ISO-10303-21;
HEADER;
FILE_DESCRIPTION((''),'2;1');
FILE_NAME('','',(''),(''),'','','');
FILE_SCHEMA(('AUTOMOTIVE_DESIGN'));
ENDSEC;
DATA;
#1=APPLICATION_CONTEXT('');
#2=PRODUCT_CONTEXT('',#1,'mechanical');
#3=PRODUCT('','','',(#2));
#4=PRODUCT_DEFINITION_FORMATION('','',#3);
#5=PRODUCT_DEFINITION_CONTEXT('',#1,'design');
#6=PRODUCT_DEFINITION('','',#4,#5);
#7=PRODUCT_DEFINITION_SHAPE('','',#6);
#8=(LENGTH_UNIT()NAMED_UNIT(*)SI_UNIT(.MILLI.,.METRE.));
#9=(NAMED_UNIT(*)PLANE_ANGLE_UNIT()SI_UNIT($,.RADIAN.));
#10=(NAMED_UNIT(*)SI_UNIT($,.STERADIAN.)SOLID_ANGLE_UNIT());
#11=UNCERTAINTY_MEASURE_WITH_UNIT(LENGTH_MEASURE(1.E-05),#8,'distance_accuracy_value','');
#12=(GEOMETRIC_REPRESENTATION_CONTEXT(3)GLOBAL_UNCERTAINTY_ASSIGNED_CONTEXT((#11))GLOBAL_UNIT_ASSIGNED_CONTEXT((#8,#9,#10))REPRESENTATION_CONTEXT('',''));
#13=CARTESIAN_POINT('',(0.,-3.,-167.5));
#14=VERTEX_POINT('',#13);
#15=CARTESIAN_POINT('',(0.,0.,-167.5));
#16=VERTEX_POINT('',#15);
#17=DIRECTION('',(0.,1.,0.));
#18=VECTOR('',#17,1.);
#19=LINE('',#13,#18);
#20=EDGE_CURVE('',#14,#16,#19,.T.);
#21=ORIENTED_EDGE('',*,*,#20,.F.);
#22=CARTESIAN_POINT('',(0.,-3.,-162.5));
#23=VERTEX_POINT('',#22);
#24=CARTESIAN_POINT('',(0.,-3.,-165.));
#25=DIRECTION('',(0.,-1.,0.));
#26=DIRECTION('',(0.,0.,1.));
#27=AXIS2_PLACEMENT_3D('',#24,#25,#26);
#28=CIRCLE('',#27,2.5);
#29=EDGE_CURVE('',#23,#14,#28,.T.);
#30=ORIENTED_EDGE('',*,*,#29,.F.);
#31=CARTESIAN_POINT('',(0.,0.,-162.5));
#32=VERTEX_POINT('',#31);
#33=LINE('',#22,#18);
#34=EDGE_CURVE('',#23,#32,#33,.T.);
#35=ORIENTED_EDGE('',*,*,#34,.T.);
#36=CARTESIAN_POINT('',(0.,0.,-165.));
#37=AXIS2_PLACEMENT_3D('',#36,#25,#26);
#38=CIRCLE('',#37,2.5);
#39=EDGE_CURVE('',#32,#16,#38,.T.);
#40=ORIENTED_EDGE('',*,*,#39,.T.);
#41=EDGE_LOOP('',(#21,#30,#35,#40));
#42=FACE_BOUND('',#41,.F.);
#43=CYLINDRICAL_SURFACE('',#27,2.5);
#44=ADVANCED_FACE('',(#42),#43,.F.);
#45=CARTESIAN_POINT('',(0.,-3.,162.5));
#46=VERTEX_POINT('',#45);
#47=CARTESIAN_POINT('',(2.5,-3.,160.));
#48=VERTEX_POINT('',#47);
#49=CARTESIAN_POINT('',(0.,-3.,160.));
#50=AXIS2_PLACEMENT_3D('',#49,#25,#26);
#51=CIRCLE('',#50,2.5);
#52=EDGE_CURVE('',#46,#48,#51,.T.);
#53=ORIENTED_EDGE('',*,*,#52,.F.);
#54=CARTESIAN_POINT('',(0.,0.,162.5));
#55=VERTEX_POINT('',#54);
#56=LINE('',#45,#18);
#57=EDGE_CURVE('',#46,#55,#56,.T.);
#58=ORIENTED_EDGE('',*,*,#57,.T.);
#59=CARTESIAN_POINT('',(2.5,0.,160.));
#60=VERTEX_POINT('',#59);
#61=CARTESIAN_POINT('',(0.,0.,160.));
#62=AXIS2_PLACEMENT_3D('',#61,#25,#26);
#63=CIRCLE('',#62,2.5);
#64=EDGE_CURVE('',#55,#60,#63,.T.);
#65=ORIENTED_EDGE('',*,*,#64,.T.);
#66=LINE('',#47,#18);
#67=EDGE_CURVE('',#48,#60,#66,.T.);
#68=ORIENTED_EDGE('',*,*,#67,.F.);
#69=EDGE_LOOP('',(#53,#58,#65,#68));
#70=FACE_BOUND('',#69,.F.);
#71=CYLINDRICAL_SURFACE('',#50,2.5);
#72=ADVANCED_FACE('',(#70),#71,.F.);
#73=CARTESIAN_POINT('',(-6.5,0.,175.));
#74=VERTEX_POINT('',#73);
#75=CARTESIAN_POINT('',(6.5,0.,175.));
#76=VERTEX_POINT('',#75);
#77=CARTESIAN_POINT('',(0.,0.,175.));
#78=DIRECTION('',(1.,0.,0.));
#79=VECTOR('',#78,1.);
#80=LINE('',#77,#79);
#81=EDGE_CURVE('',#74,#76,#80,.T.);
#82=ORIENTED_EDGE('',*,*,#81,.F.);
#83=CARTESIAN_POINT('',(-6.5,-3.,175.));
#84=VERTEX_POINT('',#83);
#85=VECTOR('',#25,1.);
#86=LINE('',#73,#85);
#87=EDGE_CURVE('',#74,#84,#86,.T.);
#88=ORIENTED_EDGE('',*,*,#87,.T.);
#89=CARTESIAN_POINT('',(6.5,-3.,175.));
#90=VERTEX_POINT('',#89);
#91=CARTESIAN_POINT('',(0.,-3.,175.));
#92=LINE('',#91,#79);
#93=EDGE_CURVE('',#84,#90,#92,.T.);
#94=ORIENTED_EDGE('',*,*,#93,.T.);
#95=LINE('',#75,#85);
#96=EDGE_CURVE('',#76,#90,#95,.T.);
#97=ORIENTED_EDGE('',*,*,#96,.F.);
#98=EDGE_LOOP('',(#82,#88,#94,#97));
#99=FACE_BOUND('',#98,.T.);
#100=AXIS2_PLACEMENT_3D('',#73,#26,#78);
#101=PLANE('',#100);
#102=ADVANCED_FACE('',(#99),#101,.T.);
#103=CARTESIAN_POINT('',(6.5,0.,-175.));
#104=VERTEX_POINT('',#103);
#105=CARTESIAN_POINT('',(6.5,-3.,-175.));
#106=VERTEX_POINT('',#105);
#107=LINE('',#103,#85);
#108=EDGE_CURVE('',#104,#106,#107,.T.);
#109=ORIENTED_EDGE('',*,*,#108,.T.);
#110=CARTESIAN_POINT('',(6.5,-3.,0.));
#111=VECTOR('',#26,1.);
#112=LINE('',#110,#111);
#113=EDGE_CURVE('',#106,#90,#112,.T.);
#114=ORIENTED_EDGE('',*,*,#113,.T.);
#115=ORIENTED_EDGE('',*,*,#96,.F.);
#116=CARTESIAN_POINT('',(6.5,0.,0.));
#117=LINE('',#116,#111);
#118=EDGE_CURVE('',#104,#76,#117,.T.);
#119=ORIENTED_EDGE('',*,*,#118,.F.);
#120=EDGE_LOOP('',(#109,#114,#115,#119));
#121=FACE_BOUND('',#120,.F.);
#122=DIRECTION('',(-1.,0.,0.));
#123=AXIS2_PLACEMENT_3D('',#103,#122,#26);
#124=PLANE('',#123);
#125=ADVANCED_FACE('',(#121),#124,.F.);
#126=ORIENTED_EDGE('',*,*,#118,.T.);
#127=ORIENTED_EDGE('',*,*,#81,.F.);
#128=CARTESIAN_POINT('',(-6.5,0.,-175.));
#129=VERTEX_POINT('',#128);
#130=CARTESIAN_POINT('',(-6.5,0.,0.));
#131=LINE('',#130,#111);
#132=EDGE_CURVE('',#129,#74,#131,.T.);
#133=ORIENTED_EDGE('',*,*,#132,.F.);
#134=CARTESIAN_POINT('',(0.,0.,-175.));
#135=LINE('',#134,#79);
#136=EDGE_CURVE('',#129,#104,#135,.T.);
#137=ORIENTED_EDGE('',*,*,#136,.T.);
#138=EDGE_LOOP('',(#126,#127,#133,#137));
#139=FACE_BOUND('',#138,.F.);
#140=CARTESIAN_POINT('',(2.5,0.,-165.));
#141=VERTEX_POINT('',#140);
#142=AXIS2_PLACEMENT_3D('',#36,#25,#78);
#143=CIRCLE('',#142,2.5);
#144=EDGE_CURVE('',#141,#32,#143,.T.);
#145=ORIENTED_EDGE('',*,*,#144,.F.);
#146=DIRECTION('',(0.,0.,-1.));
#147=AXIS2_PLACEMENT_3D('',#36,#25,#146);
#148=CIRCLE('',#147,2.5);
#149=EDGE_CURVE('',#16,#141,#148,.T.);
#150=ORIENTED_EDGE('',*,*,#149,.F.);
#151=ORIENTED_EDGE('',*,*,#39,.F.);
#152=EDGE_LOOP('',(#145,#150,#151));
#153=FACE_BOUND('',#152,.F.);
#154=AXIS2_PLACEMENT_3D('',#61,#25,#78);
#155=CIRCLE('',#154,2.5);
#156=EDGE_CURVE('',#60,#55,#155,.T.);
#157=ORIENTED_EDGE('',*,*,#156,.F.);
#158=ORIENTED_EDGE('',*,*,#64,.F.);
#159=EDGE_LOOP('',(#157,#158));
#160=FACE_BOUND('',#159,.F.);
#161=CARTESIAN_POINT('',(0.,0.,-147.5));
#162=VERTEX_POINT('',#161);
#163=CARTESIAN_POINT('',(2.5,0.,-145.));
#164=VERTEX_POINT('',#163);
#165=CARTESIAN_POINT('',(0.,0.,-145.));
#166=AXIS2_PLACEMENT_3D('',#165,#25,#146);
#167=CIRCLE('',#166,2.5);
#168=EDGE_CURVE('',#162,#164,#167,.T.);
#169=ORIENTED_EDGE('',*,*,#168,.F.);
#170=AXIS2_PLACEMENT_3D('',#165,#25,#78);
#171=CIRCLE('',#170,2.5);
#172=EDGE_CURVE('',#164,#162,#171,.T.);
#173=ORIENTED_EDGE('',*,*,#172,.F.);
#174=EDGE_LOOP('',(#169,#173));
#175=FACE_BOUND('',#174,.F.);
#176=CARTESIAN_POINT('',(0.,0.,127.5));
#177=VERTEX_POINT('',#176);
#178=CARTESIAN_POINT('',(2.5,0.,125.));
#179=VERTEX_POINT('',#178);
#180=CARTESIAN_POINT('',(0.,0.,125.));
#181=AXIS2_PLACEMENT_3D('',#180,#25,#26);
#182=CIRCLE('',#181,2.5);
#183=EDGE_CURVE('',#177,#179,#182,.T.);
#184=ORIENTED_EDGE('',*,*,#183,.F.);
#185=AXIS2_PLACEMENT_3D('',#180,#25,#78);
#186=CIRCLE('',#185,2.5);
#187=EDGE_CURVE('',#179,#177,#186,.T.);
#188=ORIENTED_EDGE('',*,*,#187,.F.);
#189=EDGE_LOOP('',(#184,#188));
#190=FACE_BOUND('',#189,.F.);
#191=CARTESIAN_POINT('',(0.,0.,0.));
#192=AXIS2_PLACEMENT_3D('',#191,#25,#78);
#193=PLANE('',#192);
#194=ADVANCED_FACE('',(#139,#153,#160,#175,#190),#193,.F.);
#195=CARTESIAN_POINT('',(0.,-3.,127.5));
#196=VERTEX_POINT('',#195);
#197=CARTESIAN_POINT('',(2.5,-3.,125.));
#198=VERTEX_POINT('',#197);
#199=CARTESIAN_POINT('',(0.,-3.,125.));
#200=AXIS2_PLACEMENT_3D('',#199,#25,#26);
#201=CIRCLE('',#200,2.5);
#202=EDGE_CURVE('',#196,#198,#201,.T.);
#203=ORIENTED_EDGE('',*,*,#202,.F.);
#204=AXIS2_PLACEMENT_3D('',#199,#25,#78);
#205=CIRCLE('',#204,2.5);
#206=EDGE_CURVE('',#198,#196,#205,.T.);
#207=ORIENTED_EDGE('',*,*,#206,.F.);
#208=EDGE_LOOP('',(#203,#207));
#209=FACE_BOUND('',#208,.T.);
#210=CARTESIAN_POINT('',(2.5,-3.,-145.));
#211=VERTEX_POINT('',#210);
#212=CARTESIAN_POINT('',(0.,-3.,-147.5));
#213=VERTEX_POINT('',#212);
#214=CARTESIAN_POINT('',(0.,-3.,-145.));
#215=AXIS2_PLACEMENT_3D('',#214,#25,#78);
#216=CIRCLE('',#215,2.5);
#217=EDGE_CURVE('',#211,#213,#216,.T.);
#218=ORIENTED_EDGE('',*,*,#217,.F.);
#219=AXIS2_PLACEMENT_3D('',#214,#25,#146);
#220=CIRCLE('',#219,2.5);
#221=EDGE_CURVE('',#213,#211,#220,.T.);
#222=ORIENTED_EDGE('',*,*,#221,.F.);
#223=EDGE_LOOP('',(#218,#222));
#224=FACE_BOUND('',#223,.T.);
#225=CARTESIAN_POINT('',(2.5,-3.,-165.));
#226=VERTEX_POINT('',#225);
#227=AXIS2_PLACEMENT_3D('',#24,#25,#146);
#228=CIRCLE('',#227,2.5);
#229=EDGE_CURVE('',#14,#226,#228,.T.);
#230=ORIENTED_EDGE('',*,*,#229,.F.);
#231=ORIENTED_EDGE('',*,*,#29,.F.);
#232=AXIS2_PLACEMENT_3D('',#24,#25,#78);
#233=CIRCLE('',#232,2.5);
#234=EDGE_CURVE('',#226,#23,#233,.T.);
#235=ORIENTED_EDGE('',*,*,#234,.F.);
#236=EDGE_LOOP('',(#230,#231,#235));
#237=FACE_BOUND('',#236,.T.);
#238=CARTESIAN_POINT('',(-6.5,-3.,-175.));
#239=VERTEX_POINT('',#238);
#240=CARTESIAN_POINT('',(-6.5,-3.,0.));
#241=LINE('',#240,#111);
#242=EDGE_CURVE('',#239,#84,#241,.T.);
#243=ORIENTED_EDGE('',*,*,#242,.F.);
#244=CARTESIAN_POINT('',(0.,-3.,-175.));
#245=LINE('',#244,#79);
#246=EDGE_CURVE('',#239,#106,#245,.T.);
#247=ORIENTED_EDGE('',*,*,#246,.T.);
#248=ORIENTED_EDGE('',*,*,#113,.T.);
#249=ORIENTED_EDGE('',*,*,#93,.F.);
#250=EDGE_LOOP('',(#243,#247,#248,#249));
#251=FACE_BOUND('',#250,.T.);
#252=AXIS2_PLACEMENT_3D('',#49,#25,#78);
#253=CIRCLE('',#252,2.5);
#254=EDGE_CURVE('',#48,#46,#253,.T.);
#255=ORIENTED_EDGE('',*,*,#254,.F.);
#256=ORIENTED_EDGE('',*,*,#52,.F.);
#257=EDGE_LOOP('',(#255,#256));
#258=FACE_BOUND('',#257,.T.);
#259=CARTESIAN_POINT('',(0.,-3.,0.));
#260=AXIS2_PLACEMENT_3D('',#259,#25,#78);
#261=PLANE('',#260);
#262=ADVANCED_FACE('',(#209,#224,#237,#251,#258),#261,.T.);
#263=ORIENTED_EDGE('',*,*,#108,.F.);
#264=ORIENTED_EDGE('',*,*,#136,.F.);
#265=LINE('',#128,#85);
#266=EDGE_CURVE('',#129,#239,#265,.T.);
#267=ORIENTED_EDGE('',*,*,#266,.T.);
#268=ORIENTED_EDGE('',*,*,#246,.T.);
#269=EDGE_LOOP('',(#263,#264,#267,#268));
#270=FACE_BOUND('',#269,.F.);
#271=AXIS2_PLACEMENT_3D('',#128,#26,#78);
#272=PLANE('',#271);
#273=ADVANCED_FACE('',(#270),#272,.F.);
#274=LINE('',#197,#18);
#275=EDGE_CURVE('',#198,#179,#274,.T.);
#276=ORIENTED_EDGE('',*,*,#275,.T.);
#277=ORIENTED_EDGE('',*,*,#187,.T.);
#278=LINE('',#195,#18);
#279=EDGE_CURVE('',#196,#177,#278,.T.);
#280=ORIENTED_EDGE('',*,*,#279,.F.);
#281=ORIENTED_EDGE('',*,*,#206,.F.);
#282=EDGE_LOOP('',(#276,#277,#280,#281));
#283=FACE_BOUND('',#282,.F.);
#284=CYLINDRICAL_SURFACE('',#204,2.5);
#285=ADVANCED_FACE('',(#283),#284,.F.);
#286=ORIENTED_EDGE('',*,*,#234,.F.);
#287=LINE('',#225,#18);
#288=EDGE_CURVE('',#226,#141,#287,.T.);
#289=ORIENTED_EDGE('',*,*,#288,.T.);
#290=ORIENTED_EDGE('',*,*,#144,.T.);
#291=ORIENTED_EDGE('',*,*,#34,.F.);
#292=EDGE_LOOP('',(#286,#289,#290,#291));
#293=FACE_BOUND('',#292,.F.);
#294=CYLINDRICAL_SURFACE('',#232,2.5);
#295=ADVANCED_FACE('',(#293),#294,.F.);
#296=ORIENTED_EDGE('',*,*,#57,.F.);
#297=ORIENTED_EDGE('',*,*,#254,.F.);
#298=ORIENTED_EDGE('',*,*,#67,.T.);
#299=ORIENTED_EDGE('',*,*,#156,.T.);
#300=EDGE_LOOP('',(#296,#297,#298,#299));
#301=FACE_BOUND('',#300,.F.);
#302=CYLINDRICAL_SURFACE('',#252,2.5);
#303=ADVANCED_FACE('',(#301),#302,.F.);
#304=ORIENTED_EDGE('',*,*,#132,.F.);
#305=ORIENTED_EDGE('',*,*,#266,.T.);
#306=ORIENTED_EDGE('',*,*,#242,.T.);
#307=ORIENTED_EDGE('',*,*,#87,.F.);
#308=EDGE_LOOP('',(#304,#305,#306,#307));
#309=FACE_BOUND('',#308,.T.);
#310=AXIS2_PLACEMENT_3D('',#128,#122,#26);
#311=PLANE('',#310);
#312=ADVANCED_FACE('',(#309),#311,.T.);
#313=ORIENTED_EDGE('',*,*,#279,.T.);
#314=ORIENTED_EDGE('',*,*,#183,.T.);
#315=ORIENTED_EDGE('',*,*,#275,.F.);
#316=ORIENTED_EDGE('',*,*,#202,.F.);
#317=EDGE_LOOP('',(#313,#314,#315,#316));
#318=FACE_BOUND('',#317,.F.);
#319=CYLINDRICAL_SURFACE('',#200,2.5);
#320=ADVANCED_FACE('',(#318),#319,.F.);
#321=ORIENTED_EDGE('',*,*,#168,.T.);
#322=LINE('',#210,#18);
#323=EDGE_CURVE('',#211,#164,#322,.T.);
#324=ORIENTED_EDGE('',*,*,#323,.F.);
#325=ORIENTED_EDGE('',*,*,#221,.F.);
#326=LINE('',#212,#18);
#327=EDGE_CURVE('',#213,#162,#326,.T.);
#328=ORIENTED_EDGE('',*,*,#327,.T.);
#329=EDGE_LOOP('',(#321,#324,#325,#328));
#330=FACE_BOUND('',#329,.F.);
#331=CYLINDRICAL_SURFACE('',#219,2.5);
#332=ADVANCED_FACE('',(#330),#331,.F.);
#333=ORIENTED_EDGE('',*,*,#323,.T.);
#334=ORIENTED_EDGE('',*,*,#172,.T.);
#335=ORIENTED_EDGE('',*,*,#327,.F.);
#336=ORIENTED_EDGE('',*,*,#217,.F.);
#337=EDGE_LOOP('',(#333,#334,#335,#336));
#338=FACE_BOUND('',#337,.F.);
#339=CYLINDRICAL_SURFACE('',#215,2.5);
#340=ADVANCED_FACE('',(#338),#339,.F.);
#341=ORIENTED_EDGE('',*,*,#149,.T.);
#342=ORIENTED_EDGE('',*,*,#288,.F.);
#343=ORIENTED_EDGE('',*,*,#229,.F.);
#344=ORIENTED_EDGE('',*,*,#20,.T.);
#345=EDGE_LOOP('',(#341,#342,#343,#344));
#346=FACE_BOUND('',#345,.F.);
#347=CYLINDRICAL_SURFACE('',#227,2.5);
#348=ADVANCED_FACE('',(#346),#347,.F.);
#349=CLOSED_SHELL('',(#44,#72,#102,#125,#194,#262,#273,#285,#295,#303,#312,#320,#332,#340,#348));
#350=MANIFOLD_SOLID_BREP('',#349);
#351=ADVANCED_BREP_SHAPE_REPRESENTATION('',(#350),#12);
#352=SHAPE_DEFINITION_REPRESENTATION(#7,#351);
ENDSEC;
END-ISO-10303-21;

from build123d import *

# Parameters (mm, degrees)
F0_W     = 13
F0_H     = 350
F1_DEPTH = 3
F3_DEPTH = 3
F5_DEPTH = 25
F7_DEPTH = 25
F8_DEPTH = 25


with BuildPart() as f1:
    # F0 (on Front) → F1 (new body)
    with BuildSketch(Plane.XZ):
        Rectangle(F0_W, F0_H)
    extrude(amount=F1_DEPTH)

    # F2 (on face) → F3 (cut)
    with BuildSketch(Plane.XZ.offset(3)):
        with BuildLine():
            ThreePointArc((2.5, 160), (1.767766953, 161.767766953), (0, 162.5))
            ThreePointArc((0, 162.5), (-1.767766953, 158.232233047), (2.5, 160))
        make_face()
    extrude(amount=-F3_DEPTH, mode=Mode.SUBTRACT)

    # F4 (on face) → F5 (cut)
    with BuildSketch(Plane.XZ.offset(3)):
        with BuildLine():
            ThreePointArc((2.5, -145), (-1.767766953, -143.232233047), (0, -147.5))
            ThreePointArc((0, -147.5), (1.767766953, -146.767766953), (2.5, -145))
        make_face()
    extrude(amount=-F5_DEPTH, mode=Mode.SUBTRACT)

    # F6 (on face) → F7 (cut)
    with BuildSketch(Plane.XZ.offset(3)):
        with BuildLine():
            ThreePointArc((2.5, 125), (1.767766953, 126.767766953), (0, 127.5))
            ThreePointArc((0, 127.5), (-1.767766953, 123.232233047), (2.5, 125))
        make_face()
    extrude(amount=-F7_DEPTH, mode=Mode.SUBTRACT)

    # F4 (on face) → F8 (cut)
    with BuildSketch(Plane.XZ.offset(3)):
        with BuildLine():
            ThreePointArc((0, -162.5), (-2.5, -165), (0, -167.5))
            Line((0, -167.5), (0, -165))
            Line((0, -165), (0, -162.5))
        make_face()
        with BuildLine():
            ThreePointArc((2.5, -145), (-1.767766953, -143.232233047), (0, -147.5))
            ThreePointArc((0, -147.5), (1.767766953, -146.767766953), (2.5, -145))
        make_face()
        with BuildLine():
            Line((0, -165), (0, -167.5))
            ThreePointArc((0, -167.5), (1.767766953, -166.767766953), (2.5, -165))
            ThreePointArc((2.5, -165), (1.767766953, -163.232233047), (0, -162.5))
            Line((0, -162.5), (0, -165))
        make_face()
    extrude(amount=-F8_DEPTH, mode=Mode.SUBTRACT)


solid = f1.part
